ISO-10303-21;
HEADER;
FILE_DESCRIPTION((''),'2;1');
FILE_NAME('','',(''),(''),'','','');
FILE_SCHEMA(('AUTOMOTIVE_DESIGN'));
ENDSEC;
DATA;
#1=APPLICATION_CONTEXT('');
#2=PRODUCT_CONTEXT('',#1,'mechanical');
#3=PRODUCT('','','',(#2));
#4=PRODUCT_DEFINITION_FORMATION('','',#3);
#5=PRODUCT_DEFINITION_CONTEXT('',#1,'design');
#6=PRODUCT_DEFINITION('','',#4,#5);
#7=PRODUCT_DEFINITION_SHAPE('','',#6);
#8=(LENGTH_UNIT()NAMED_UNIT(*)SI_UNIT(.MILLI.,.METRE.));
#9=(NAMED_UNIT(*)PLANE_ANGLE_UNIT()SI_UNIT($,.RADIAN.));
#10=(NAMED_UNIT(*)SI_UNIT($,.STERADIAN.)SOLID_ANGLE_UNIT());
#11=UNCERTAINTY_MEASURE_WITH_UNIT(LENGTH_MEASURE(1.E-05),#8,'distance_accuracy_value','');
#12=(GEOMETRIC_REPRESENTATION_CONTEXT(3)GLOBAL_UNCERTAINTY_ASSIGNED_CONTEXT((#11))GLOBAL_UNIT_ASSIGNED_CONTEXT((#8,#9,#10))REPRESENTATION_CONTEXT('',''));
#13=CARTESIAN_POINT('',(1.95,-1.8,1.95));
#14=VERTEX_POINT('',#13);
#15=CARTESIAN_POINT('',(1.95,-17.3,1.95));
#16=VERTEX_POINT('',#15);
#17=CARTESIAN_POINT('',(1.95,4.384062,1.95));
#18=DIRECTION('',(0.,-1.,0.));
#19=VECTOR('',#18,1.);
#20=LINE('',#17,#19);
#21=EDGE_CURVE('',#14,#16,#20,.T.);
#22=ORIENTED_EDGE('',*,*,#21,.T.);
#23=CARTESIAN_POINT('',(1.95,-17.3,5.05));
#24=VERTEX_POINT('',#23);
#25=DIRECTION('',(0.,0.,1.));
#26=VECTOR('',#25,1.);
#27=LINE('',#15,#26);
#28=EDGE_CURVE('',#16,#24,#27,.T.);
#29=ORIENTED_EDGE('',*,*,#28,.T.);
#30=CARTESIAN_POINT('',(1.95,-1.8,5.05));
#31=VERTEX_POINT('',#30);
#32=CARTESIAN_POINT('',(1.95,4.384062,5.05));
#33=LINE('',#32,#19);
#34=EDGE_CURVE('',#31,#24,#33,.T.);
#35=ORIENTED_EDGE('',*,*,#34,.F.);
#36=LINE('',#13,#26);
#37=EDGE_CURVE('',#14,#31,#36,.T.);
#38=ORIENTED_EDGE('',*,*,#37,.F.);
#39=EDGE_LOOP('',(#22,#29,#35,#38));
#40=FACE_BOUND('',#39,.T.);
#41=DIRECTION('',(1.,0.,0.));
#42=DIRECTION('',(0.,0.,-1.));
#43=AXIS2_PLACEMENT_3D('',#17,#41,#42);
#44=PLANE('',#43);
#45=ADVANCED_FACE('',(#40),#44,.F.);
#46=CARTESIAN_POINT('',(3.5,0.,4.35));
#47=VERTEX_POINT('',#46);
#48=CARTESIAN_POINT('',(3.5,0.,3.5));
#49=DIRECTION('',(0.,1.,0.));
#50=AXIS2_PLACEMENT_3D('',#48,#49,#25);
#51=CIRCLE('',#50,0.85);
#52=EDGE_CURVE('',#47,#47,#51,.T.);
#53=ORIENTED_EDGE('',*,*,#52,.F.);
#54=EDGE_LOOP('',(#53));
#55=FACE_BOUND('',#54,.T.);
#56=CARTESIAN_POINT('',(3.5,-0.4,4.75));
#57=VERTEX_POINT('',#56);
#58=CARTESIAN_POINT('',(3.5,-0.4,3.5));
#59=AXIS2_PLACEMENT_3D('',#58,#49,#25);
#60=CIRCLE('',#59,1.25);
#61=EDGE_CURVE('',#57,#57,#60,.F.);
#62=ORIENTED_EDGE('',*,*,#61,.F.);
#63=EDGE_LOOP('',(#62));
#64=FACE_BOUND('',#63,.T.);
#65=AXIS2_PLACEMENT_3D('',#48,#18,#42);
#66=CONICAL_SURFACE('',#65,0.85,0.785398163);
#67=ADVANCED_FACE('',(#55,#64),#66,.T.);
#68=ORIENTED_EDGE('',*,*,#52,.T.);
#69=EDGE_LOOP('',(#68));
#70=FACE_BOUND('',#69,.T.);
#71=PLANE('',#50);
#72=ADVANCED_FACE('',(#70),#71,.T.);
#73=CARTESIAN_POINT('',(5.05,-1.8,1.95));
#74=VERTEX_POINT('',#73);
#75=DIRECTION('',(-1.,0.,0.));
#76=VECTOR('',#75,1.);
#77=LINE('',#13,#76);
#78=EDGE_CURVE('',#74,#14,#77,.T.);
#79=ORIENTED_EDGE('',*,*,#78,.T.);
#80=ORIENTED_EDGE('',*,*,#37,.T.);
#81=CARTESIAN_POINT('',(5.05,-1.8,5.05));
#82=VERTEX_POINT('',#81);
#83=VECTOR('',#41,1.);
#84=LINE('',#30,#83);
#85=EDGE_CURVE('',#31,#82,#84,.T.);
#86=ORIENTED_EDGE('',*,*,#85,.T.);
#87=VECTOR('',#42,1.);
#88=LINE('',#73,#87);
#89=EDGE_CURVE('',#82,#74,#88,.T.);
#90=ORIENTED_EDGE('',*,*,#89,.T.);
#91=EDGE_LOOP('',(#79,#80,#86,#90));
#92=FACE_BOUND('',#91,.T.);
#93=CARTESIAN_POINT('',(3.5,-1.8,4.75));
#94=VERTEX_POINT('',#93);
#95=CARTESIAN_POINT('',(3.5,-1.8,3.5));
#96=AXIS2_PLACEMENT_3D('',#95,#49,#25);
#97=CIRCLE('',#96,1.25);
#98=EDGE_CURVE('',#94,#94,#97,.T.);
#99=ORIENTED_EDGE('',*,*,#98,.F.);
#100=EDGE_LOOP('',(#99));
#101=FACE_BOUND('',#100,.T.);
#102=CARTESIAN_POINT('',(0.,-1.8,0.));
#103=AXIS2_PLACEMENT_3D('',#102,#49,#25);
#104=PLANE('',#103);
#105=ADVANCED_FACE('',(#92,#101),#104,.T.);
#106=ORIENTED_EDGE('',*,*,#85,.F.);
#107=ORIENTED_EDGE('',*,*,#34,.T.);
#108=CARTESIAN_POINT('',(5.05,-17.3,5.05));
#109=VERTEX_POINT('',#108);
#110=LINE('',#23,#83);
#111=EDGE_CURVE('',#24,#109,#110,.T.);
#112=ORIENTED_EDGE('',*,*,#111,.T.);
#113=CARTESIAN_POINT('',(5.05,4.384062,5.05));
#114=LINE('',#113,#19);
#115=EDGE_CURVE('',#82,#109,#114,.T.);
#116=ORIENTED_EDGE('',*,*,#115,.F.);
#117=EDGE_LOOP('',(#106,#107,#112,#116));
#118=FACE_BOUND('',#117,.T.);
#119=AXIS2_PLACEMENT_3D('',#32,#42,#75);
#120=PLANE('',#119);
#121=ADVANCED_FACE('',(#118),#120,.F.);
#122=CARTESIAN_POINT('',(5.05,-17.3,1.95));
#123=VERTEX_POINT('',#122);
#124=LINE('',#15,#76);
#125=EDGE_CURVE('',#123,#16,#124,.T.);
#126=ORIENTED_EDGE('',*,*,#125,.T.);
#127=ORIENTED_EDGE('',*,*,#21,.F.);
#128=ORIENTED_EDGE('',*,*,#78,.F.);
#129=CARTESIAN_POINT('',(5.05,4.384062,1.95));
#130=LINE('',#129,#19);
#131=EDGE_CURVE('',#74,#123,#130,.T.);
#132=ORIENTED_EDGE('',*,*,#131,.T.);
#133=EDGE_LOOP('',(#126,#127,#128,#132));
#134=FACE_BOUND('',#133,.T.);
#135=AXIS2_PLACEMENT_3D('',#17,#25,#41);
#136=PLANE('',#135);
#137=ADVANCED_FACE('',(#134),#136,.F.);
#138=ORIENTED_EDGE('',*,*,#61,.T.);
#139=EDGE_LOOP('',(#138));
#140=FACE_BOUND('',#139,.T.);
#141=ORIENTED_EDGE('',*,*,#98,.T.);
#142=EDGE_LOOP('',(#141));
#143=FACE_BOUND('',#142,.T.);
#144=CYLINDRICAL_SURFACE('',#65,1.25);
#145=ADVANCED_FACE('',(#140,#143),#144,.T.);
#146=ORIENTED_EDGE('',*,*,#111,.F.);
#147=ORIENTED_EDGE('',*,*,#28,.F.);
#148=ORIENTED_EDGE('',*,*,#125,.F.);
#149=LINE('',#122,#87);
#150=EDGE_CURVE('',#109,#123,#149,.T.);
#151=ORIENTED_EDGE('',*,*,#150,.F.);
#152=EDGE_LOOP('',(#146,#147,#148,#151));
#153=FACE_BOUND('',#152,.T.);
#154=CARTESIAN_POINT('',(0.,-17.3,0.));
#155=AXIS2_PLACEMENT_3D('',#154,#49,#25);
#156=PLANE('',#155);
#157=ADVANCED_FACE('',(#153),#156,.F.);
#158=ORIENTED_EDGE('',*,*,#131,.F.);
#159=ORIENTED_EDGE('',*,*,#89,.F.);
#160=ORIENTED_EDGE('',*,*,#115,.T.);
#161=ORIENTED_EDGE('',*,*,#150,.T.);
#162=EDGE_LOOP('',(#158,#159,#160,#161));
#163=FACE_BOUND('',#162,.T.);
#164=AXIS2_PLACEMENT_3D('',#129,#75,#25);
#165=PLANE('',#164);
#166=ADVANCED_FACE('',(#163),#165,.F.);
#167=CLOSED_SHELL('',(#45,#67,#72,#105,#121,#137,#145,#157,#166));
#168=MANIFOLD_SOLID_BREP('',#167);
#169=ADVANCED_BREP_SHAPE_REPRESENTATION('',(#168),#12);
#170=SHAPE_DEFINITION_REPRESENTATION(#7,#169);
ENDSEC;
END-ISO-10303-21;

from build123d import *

# Parameters (mm, degrees)
AUFSATZ_LINEAR_AUSTRAGEN1_OUTLINE_W = 3.1
AUFSATZ_LINEAR_AUSTRAGEN1_OUTLINE_H = 3.1
AUFSATZ_LINEAR_AUSTRAGEN1_DEPTH     = 15.5
SKIZZE2_R                           = 1.25
AUFSATZ_LINEAR_AUSTRAGEN2_DEPTH     = 1.8
FASE1_SIZE                          = 0.4


# Read off the part's stored shape, not the designer's step: Aufsatz-Linear austragen1
with BuildPart() as part:
    # Aufsatz-Linear austragen1 outline → Aufsatz-Linear austragen1 (new body)
    with BuildSketch(Plane(origin=(0, -17.3, 0), x_dir=(1, 0, 0), z_dir=(0, 1, 0))):
        with Locations((3.5, -3.5)):
            Rectangle(AUFSATZ_LINEAR_AUSTRAGEN1_OUTLINE_W, AUFSATZ_LINEAR_AUSTRAGEN1_OUTLINE_H)
    extrude(amount=AUFSATZ_LINEAR_AUSTRAGEN1_DEPTH)

    # Skizze2 → Aufsatz-Linear austragen2 (add)
    with BuildSketch(Plane(origin=(0, -1.8, 0), x_dir=(1, 0, 0), z_dir=(0, 1, 0))):
        with Locations(Location((3.5, -3.5, 0), (0, 0, 270))):
            Circle(SKIZZE2_R)
    extrude(amount=AUFSATZ_LINEAR_AUSTRAGEN2_DEPTH)

    # Fase1
    fase1_edges = [part.edges().sort_by_distance(p)[0] for p in [
        (3.5, 0, 2.25),
    ]]
    chamfer(fase1_edges, length=FASE1_SIZE)


solid = part.part
